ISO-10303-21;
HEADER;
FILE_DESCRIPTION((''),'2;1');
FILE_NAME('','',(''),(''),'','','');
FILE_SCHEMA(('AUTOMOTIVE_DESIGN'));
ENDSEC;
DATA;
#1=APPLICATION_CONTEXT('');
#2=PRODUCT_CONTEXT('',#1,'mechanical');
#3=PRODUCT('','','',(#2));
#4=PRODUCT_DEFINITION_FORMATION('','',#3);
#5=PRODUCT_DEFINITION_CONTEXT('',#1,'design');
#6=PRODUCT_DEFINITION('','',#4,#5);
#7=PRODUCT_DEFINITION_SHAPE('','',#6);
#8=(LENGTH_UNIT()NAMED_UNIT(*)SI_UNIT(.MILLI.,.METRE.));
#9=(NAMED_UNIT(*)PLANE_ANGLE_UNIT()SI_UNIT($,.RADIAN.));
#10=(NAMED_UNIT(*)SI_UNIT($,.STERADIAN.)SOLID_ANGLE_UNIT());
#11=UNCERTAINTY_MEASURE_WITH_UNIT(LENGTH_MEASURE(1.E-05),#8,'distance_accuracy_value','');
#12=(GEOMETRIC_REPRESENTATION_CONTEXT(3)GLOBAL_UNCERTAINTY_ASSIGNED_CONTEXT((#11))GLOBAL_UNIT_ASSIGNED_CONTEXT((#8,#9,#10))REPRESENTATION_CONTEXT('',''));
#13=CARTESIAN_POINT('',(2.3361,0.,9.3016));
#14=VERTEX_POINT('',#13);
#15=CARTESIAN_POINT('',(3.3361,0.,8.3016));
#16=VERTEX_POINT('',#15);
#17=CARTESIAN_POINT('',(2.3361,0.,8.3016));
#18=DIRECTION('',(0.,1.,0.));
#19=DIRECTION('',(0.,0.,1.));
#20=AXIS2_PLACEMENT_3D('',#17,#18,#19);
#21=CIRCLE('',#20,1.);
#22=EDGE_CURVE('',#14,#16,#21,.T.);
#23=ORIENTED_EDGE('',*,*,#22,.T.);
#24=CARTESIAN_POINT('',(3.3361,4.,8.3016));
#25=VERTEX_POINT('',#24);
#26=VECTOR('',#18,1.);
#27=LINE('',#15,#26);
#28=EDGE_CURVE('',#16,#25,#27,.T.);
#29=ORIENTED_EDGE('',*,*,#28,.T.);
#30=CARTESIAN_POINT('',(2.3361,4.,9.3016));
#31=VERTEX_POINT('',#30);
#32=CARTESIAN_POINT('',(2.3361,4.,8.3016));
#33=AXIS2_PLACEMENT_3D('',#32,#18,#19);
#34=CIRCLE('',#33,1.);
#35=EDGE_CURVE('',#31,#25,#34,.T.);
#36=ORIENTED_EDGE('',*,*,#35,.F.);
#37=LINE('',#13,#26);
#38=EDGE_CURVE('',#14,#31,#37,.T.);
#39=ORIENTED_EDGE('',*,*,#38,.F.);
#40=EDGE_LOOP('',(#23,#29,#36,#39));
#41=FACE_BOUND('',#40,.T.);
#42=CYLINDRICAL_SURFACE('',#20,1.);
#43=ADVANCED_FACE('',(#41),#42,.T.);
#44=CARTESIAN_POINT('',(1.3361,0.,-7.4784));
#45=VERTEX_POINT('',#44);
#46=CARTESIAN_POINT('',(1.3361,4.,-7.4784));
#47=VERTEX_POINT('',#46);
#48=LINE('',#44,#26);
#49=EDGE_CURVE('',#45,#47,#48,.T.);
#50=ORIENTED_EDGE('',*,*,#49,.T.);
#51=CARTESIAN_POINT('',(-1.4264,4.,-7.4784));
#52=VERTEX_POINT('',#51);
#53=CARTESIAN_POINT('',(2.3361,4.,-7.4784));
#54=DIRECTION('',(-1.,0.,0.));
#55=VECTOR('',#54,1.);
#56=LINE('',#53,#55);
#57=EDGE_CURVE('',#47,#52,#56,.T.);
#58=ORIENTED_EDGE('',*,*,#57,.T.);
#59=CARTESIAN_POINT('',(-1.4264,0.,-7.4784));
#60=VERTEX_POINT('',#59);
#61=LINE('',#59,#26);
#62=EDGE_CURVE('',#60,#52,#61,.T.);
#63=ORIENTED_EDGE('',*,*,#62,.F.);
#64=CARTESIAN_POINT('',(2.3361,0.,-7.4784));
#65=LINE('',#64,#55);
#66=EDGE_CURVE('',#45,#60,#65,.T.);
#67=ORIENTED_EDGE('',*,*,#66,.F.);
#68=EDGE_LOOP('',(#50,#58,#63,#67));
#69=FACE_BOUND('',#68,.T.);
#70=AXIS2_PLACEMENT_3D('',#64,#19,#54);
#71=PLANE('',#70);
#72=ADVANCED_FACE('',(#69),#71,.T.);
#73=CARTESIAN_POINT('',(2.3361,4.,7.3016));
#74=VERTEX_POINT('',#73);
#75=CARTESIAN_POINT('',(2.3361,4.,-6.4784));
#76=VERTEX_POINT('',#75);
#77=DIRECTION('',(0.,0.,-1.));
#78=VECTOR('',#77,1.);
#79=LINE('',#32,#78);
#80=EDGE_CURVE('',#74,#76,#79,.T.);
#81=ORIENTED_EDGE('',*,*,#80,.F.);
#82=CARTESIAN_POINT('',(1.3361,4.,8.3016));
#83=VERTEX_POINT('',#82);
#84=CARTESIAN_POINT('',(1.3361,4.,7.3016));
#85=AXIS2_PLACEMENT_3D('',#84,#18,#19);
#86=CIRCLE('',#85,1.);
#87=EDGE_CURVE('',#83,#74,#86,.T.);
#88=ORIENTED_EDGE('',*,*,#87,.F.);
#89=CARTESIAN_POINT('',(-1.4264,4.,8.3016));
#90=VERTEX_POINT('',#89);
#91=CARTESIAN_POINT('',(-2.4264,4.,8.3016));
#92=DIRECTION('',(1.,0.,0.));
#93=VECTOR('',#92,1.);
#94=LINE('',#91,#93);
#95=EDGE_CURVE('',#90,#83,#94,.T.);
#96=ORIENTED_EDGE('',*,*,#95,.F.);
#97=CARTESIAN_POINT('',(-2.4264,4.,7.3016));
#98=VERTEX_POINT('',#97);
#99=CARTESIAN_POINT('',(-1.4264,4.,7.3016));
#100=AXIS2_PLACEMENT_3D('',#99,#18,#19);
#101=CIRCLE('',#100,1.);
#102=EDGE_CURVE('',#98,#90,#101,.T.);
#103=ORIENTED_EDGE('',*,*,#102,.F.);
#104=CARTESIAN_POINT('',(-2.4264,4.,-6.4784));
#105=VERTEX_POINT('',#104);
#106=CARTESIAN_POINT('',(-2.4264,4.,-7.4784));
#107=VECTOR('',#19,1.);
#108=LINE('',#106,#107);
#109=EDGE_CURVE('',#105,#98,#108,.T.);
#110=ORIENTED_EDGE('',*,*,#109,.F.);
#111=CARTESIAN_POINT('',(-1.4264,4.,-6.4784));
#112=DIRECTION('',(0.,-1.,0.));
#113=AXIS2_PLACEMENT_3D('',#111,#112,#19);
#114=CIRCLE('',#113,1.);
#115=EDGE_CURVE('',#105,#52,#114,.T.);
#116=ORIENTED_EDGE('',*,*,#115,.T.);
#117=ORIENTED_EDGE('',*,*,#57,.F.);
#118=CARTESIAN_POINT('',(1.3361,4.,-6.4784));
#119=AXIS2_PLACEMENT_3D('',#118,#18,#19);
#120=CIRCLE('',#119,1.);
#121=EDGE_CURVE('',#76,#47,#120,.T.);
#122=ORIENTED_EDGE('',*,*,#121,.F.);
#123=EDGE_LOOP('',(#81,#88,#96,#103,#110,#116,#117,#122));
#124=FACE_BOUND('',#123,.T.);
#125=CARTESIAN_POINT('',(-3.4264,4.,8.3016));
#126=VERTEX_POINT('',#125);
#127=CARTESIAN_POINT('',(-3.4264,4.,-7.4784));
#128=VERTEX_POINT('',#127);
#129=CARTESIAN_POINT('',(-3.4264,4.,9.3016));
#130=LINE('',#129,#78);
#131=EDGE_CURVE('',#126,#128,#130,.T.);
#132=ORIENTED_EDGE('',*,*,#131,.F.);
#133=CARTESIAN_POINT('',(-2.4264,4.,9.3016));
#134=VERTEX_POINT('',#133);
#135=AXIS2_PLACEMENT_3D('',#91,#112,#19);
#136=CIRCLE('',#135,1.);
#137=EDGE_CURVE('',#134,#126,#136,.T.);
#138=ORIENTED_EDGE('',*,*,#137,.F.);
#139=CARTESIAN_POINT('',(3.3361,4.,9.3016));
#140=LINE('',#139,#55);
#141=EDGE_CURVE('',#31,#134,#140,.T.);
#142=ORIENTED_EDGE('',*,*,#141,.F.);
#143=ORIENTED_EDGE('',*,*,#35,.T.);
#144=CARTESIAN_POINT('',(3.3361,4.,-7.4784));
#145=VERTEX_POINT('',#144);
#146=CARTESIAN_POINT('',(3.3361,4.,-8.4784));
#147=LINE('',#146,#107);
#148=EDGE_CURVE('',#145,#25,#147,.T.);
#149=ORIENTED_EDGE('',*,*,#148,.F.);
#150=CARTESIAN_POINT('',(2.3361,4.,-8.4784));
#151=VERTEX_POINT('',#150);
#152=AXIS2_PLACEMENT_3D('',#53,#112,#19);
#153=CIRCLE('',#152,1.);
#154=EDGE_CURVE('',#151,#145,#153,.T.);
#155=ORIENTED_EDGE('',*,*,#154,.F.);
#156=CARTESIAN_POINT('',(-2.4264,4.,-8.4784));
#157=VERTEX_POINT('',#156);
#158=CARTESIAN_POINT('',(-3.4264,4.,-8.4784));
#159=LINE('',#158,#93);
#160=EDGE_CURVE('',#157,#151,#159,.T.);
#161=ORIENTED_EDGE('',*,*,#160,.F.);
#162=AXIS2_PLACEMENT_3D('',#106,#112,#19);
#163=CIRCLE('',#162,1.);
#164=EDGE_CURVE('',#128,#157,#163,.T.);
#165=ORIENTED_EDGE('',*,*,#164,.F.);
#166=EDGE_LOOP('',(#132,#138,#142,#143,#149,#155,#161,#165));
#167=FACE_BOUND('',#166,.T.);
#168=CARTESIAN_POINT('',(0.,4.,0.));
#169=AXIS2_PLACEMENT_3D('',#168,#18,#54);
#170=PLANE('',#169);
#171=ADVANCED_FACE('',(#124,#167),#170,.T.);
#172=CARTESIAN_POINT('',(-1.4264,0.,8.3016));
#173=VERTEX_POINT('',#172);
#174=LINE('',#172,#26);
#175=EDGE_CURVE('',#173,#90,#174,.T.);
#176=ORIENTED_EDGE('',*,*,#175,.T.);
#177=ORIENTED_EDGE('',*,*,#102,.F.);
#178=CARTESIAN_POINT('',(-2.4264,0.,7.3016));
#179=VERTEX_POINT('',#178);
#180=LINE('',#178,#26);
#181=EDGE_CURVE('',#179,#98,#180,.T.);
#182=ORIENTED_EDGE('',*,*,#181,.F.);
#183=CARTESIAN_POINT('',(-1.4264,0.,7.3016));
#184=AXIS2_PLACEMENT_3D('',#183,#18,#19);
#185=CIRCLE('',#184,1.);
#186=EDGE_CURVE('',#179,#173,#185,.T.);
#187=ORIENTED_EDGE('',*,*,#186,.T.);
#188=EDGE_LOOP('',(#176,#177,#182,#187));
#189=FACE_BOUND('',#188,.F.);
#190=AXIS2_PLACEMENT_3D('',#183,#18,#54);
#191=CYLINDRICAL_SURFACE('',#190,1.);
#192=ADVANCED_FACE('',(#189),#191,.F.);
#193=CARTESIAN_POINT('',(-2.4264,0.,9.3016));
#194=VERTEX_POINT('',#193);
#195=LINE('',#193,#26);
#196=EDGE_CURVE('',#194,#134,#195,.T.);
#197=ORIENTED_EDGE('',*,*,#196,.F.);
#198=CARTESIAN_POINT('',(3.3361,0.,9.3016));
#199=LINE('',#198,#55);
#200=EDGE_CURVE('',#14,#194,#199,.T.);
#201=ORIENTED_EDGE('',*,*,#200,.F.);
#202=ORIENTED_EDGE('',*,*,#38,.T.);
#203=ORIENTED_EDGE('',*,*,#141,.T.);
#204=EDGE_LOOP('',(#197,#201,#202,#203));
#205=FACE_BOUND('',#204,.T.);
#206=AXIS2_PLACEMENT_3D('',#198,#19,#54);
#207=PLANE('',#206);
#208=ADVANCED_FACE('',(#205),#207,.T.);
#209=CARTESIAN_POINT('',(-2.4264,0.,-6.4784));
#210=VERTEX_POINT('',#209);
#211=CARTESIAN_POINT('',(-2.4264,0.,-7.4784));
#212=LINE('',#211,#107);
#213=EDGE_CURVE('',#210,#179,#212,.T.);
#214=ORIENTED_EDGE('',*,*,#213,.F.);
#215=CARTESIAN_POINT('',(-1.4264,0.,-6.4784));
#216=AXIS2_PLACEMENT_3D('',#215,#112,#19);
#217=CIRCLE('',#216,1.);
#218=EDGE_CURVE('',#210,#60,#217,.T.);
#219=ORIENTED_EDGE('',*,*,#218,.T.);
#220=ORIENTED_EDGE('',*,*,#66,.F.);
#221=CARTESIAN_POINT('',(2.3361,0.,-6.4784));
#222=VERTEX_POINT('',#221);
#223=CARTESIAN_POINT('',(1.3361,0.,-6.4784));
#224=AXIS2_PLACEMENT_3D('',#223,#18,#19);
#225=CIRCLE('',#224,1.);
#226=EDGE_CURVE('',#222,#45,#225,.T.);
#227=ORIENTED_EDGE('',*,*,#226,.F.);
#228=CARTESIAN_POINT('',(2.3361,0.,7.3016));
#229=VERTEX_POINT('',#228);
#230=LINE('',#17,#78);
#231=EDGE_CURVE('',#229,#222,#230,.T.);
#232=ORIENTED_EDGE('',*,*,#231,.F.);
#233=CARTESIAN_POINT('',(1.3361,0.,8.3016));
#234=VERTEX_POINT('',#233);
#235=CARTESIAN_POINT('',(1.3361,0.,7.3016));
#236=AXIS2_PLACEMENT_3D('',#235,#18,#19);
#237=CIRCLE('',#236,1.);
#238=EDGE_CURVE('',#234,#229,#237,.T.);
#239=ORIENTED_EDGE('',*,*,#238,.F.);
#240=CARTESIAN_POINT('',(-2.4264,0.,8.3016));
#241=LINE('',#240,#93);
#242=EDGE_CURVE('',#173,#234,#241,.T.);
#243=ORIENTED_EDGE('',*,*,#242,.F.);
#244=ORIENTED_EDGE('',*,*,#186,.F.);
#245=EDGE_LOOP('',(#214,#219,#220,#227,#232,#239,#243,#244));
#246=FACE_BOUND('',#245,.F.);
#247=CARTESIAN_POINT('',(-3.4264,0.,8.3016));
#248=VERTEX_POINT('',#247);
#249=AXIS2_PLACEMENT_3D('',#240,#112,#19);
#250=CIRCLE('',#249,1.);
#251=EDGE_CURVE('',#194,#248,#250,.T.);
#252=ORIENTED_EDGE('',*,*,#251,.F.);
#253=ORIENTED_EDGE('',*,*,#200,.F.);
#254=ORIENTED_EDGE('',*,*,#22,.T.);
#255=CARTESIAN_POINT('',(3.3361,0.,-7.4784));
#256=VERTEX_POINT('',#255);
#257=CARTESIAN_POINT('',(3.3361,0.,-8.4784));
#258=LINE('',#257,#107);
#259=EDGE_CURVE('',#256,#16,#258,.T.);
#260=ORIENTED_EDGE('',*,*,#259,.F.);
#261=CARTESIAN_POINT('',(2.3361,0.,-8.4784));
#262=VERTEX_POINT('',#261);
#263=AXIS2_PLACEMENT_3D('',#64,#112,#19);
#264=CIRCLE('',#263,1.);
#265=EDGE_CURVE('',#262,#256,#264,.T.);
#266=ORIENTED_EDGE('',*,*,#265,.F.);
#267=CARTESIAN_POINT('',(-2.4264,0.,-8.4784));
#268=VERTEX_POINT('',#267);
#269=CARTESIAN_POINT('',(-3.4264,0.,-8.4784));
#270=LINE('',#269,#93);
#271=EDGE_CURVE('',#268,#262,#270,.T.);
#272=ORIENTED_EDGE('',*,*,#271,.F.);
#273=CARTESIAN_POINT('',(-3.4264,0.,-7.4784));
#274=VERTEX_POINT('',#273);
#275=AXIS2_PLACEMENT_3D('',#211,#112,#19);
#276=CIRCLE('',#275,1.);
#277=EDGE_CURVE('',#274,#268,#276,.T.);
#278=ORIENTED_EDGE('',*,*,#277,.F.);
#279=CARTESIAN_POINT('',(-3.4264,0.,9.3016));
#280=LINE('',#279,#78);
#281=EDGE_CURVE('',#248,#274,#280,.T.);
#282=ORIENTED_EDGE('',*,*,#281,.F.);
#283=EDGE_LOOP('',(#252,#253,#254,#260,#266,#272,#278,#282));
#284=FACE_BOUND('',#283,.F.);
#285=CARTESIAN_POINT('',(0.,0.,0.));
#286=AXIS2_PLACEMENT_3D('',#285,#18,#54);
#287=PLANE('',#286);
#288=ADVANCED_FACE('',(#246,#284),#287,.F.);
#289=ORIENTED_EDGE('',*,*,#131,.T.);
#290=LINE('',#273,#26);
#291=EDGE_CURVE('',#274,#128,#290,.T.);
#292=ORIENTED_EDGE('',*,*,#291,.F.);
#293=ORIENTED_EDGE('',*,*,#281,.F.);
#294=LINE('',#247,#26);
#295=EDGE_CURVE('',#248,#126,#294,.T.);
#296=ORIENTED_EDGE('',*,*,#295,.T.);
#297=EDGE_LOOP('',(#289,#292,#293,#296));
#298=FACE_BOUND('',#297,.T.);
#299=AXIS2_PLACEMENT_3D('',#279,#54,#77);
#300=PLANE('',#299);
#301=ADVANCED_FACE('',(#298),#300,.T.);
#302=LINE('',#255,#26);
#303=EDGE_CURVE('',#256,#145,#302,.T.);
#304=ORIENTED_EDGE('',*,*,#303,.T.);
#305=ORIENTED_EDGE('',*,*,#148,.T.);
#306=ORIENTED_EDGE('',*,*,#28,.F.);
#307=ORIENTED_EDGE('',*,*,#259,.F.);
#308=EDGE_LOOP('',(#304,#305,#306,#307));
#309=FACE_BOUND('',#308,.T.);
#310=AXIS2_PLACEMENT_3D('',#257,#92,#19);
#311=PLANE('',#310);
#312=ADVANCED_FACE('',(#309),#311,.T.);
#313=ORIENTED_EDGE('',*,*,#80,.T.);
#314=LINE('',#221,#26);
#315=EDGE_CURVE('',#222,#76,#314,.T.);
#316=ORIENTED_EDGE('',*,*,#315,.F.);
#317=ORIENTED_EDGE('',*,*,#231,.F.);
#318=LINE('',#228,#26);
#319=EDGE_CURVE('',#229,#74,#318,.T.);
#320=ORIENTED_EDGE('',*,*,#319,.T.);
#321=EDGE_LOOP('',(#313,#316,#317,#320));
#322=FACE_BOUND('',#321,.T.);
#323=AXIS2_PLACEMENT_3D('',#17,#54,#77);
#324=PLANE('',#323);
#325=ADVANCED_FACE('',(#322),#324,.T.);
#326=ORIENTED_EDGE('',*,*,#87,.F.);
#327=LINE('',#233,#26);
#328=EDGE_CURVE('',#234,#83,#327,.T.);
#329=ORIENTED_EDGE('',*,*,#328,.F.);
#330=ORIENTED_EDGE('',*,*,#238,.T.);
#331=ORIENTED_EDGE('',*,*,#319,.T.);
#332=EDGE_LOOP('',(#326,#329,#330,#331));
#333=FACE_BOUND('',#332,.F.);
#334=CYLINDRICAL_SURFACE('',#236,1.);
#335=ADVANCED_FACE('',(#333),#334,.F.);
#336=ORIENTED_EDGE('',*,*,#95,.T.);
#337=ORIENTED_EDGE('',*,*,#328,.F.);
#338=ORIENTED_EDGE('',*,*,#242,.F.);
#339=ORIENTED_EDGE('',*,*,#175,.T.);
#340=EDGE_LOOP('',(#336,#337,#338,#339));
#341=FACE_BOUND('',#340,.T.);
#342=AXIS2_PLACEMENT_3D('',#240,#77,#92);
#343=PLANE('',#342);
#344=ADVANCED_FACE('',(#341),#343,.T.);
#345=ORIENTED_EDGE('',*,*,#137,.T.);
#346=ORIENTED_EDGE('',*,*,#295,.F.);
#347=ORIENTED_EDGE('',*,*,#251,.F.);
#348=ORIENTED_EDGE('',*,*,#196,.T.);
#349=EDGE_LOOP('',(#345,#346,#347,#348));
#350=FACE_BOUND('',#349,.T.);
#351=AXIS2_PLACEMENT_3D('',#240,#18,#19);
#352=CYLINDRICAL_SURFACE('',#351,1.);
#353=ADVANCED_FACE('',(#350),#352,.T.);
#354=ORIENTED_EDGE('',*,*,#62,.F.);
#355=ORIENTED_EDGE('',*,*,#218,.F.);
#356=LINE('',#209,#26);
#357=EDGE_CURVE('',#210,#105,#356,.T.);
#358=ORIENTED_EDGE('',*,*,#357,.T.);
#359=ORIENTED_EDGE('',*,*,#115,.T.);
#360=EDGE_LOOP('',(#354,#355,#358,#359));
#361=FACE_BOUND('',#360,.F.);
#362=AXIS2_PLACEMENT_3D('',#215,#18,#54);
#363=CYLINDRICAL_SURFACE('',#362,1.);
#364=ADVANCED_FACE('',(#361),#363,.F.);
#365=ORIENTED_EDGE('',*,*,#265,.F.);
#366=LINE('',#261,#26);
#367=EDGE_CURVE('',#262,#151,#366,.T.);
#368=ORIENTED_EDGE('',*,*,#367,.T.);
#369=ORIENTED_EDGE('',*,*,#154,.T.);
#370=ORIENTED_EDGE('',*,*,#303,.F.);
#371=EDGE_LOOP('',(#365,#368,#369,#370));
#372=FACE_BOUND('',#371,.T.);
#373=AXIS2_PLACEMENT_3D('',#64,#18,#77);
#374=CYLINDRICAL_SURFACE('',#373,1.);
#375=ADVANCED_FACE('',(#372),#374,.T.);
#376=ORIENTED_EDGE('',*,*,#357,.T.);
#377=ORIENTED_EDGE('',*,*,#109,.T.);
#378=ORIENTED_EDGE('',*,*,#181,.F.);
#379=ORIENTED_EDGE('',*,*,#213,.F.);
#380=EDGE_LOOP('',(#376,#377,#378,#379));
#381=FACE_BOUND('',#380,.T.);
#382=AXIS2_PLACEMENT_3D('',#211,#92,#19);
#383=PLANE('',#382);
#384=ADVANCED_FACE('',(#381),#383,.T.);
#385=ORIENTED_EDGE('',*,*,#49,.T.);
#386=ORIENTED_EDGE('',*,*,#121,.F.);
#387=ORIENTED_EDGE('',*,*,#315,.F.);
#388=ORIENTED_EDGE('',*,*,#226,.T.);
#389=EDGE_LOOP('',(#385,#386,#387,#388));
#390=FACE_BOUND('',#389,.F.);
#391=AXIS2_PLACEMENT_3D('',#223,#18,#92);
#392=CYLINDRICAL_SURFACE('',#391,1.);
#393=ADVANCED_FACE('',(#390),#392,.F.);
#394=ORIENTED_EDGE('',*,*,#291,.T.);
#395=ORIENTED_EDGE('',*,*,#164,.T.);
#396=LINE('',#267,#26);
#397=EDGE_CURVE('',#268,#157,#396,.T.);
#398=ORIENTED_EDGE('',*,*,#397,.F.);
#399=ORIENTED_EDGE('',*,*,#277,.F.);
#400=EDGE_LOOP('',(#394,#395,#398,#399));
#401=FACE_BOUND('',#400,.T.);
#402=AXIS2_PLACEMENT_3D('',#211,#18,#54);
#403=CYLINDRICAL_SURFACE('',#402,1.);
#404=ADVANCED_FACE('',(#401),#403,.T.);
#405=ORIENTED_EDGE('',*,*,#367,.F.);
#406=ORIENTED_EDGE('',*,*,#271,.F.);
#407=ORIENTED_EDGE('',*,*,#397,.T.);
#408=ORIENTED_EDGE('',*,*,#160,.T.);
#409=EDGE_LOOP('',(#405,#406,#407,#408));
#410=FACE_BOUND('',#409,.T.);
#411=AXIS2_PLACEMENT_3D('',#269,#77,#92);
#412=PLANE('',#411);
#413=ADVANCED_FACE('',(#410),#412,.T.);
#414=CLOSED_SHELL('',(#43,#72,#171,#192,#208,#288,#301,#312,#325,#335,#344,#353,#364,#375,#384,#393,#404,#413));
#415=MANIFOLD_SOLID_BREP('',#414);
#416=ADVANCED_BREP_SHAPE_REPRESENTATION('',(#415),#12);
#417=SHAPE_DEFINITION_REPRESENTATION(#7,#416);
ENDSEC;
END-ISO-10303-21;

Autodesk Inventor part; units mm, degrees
ref_plane "YZ Plane" through (0, 0, 0) normal (1, 0, 0) x (0, 1, 0)
ref_plane "XZ Plane" through (0, 0, 0) normal (0, 1, 0) x (-1, 0, 0)
ref_plane "XY Plane" through (0, 0, 0) normal (0, 0, 1) x (1, 0, 0)
sketch "Sketch1" plane through (0, 0, 0) normal (0, 1, 0) x (-1, 0, 0)
  line L0 (-3.3361, 9.3016) -> (3.4264, 9.3016)
  line L1 (3.4264, 9.3016) -> (3.4264, -8.4784)
  line L2 (3.4264, -8.4784) -> (-3.3361, -8.4784)
  line L3 (-3.3361, -8.4784) -> (-3.3361, 9.3016)
  line L4 (2.4264, -7.4784) -> (2.4264, 8.3016)
  line L5 (2.4264, 8.3016) -> (-2.3361, 8.3016)
  line L6 (-2.3361, 8.3016) -> (-2.3361, -7.4784)
  line L7 (-2.3361, -7.4784) -> (2.4264, -7.4784)
  point P0 (0, 0)
  dimension "d0" = 17.78
  dimension "d1" = 6.7625
  dimension "d2" = 1
extrude "Extrusion1" add sketch "Sketch1" along normal blind 4
fillet "Fillet1" radius 1 8 edges at (-3.4264, 2, 9.3016) (-3.4264, 2, -8.4784) (3.3361, 2, -8.4784) (3.3361, 2, 9.3016) (2.3361, 2, 8.3016) (-2.4264, 2, 8.3016) (-2.4264, 2, -7.4784) (2.3361, 2, -7.4784)
sketch "Sketch2" plane through (-2.4264, 0, -5.9384) normal (-1, 0, 0) x (0, 0, 1)
  circle A0 centre (0, 2) radius 2.54
  circle A1 centre (12.7, 2) radius 2.54
  line L0 (-1.54, 4) -> (14.24, 4) projected
  line L1 (15.24, 0) -> (15.24, 4) projected
  line L2 (15.24, 2) -> (-2.54, 2) construction
  line L3 (-2.54, 0) -> (-2.54, 4) projected
  dimension "d6" = 5.08
  dimension "d7" = 12.7
surface extrude "ExtrusionSrf1" sketch "Sketch2" along normal up to surface (1 mm away) shown yes curves A0
surface extrude "ExtrusionSrf2" sketch "Sketch2" along normal up to surface (1 mm away) shown yes curves A1
properties part number "ziptie" material "Acetal Resin, Black"
